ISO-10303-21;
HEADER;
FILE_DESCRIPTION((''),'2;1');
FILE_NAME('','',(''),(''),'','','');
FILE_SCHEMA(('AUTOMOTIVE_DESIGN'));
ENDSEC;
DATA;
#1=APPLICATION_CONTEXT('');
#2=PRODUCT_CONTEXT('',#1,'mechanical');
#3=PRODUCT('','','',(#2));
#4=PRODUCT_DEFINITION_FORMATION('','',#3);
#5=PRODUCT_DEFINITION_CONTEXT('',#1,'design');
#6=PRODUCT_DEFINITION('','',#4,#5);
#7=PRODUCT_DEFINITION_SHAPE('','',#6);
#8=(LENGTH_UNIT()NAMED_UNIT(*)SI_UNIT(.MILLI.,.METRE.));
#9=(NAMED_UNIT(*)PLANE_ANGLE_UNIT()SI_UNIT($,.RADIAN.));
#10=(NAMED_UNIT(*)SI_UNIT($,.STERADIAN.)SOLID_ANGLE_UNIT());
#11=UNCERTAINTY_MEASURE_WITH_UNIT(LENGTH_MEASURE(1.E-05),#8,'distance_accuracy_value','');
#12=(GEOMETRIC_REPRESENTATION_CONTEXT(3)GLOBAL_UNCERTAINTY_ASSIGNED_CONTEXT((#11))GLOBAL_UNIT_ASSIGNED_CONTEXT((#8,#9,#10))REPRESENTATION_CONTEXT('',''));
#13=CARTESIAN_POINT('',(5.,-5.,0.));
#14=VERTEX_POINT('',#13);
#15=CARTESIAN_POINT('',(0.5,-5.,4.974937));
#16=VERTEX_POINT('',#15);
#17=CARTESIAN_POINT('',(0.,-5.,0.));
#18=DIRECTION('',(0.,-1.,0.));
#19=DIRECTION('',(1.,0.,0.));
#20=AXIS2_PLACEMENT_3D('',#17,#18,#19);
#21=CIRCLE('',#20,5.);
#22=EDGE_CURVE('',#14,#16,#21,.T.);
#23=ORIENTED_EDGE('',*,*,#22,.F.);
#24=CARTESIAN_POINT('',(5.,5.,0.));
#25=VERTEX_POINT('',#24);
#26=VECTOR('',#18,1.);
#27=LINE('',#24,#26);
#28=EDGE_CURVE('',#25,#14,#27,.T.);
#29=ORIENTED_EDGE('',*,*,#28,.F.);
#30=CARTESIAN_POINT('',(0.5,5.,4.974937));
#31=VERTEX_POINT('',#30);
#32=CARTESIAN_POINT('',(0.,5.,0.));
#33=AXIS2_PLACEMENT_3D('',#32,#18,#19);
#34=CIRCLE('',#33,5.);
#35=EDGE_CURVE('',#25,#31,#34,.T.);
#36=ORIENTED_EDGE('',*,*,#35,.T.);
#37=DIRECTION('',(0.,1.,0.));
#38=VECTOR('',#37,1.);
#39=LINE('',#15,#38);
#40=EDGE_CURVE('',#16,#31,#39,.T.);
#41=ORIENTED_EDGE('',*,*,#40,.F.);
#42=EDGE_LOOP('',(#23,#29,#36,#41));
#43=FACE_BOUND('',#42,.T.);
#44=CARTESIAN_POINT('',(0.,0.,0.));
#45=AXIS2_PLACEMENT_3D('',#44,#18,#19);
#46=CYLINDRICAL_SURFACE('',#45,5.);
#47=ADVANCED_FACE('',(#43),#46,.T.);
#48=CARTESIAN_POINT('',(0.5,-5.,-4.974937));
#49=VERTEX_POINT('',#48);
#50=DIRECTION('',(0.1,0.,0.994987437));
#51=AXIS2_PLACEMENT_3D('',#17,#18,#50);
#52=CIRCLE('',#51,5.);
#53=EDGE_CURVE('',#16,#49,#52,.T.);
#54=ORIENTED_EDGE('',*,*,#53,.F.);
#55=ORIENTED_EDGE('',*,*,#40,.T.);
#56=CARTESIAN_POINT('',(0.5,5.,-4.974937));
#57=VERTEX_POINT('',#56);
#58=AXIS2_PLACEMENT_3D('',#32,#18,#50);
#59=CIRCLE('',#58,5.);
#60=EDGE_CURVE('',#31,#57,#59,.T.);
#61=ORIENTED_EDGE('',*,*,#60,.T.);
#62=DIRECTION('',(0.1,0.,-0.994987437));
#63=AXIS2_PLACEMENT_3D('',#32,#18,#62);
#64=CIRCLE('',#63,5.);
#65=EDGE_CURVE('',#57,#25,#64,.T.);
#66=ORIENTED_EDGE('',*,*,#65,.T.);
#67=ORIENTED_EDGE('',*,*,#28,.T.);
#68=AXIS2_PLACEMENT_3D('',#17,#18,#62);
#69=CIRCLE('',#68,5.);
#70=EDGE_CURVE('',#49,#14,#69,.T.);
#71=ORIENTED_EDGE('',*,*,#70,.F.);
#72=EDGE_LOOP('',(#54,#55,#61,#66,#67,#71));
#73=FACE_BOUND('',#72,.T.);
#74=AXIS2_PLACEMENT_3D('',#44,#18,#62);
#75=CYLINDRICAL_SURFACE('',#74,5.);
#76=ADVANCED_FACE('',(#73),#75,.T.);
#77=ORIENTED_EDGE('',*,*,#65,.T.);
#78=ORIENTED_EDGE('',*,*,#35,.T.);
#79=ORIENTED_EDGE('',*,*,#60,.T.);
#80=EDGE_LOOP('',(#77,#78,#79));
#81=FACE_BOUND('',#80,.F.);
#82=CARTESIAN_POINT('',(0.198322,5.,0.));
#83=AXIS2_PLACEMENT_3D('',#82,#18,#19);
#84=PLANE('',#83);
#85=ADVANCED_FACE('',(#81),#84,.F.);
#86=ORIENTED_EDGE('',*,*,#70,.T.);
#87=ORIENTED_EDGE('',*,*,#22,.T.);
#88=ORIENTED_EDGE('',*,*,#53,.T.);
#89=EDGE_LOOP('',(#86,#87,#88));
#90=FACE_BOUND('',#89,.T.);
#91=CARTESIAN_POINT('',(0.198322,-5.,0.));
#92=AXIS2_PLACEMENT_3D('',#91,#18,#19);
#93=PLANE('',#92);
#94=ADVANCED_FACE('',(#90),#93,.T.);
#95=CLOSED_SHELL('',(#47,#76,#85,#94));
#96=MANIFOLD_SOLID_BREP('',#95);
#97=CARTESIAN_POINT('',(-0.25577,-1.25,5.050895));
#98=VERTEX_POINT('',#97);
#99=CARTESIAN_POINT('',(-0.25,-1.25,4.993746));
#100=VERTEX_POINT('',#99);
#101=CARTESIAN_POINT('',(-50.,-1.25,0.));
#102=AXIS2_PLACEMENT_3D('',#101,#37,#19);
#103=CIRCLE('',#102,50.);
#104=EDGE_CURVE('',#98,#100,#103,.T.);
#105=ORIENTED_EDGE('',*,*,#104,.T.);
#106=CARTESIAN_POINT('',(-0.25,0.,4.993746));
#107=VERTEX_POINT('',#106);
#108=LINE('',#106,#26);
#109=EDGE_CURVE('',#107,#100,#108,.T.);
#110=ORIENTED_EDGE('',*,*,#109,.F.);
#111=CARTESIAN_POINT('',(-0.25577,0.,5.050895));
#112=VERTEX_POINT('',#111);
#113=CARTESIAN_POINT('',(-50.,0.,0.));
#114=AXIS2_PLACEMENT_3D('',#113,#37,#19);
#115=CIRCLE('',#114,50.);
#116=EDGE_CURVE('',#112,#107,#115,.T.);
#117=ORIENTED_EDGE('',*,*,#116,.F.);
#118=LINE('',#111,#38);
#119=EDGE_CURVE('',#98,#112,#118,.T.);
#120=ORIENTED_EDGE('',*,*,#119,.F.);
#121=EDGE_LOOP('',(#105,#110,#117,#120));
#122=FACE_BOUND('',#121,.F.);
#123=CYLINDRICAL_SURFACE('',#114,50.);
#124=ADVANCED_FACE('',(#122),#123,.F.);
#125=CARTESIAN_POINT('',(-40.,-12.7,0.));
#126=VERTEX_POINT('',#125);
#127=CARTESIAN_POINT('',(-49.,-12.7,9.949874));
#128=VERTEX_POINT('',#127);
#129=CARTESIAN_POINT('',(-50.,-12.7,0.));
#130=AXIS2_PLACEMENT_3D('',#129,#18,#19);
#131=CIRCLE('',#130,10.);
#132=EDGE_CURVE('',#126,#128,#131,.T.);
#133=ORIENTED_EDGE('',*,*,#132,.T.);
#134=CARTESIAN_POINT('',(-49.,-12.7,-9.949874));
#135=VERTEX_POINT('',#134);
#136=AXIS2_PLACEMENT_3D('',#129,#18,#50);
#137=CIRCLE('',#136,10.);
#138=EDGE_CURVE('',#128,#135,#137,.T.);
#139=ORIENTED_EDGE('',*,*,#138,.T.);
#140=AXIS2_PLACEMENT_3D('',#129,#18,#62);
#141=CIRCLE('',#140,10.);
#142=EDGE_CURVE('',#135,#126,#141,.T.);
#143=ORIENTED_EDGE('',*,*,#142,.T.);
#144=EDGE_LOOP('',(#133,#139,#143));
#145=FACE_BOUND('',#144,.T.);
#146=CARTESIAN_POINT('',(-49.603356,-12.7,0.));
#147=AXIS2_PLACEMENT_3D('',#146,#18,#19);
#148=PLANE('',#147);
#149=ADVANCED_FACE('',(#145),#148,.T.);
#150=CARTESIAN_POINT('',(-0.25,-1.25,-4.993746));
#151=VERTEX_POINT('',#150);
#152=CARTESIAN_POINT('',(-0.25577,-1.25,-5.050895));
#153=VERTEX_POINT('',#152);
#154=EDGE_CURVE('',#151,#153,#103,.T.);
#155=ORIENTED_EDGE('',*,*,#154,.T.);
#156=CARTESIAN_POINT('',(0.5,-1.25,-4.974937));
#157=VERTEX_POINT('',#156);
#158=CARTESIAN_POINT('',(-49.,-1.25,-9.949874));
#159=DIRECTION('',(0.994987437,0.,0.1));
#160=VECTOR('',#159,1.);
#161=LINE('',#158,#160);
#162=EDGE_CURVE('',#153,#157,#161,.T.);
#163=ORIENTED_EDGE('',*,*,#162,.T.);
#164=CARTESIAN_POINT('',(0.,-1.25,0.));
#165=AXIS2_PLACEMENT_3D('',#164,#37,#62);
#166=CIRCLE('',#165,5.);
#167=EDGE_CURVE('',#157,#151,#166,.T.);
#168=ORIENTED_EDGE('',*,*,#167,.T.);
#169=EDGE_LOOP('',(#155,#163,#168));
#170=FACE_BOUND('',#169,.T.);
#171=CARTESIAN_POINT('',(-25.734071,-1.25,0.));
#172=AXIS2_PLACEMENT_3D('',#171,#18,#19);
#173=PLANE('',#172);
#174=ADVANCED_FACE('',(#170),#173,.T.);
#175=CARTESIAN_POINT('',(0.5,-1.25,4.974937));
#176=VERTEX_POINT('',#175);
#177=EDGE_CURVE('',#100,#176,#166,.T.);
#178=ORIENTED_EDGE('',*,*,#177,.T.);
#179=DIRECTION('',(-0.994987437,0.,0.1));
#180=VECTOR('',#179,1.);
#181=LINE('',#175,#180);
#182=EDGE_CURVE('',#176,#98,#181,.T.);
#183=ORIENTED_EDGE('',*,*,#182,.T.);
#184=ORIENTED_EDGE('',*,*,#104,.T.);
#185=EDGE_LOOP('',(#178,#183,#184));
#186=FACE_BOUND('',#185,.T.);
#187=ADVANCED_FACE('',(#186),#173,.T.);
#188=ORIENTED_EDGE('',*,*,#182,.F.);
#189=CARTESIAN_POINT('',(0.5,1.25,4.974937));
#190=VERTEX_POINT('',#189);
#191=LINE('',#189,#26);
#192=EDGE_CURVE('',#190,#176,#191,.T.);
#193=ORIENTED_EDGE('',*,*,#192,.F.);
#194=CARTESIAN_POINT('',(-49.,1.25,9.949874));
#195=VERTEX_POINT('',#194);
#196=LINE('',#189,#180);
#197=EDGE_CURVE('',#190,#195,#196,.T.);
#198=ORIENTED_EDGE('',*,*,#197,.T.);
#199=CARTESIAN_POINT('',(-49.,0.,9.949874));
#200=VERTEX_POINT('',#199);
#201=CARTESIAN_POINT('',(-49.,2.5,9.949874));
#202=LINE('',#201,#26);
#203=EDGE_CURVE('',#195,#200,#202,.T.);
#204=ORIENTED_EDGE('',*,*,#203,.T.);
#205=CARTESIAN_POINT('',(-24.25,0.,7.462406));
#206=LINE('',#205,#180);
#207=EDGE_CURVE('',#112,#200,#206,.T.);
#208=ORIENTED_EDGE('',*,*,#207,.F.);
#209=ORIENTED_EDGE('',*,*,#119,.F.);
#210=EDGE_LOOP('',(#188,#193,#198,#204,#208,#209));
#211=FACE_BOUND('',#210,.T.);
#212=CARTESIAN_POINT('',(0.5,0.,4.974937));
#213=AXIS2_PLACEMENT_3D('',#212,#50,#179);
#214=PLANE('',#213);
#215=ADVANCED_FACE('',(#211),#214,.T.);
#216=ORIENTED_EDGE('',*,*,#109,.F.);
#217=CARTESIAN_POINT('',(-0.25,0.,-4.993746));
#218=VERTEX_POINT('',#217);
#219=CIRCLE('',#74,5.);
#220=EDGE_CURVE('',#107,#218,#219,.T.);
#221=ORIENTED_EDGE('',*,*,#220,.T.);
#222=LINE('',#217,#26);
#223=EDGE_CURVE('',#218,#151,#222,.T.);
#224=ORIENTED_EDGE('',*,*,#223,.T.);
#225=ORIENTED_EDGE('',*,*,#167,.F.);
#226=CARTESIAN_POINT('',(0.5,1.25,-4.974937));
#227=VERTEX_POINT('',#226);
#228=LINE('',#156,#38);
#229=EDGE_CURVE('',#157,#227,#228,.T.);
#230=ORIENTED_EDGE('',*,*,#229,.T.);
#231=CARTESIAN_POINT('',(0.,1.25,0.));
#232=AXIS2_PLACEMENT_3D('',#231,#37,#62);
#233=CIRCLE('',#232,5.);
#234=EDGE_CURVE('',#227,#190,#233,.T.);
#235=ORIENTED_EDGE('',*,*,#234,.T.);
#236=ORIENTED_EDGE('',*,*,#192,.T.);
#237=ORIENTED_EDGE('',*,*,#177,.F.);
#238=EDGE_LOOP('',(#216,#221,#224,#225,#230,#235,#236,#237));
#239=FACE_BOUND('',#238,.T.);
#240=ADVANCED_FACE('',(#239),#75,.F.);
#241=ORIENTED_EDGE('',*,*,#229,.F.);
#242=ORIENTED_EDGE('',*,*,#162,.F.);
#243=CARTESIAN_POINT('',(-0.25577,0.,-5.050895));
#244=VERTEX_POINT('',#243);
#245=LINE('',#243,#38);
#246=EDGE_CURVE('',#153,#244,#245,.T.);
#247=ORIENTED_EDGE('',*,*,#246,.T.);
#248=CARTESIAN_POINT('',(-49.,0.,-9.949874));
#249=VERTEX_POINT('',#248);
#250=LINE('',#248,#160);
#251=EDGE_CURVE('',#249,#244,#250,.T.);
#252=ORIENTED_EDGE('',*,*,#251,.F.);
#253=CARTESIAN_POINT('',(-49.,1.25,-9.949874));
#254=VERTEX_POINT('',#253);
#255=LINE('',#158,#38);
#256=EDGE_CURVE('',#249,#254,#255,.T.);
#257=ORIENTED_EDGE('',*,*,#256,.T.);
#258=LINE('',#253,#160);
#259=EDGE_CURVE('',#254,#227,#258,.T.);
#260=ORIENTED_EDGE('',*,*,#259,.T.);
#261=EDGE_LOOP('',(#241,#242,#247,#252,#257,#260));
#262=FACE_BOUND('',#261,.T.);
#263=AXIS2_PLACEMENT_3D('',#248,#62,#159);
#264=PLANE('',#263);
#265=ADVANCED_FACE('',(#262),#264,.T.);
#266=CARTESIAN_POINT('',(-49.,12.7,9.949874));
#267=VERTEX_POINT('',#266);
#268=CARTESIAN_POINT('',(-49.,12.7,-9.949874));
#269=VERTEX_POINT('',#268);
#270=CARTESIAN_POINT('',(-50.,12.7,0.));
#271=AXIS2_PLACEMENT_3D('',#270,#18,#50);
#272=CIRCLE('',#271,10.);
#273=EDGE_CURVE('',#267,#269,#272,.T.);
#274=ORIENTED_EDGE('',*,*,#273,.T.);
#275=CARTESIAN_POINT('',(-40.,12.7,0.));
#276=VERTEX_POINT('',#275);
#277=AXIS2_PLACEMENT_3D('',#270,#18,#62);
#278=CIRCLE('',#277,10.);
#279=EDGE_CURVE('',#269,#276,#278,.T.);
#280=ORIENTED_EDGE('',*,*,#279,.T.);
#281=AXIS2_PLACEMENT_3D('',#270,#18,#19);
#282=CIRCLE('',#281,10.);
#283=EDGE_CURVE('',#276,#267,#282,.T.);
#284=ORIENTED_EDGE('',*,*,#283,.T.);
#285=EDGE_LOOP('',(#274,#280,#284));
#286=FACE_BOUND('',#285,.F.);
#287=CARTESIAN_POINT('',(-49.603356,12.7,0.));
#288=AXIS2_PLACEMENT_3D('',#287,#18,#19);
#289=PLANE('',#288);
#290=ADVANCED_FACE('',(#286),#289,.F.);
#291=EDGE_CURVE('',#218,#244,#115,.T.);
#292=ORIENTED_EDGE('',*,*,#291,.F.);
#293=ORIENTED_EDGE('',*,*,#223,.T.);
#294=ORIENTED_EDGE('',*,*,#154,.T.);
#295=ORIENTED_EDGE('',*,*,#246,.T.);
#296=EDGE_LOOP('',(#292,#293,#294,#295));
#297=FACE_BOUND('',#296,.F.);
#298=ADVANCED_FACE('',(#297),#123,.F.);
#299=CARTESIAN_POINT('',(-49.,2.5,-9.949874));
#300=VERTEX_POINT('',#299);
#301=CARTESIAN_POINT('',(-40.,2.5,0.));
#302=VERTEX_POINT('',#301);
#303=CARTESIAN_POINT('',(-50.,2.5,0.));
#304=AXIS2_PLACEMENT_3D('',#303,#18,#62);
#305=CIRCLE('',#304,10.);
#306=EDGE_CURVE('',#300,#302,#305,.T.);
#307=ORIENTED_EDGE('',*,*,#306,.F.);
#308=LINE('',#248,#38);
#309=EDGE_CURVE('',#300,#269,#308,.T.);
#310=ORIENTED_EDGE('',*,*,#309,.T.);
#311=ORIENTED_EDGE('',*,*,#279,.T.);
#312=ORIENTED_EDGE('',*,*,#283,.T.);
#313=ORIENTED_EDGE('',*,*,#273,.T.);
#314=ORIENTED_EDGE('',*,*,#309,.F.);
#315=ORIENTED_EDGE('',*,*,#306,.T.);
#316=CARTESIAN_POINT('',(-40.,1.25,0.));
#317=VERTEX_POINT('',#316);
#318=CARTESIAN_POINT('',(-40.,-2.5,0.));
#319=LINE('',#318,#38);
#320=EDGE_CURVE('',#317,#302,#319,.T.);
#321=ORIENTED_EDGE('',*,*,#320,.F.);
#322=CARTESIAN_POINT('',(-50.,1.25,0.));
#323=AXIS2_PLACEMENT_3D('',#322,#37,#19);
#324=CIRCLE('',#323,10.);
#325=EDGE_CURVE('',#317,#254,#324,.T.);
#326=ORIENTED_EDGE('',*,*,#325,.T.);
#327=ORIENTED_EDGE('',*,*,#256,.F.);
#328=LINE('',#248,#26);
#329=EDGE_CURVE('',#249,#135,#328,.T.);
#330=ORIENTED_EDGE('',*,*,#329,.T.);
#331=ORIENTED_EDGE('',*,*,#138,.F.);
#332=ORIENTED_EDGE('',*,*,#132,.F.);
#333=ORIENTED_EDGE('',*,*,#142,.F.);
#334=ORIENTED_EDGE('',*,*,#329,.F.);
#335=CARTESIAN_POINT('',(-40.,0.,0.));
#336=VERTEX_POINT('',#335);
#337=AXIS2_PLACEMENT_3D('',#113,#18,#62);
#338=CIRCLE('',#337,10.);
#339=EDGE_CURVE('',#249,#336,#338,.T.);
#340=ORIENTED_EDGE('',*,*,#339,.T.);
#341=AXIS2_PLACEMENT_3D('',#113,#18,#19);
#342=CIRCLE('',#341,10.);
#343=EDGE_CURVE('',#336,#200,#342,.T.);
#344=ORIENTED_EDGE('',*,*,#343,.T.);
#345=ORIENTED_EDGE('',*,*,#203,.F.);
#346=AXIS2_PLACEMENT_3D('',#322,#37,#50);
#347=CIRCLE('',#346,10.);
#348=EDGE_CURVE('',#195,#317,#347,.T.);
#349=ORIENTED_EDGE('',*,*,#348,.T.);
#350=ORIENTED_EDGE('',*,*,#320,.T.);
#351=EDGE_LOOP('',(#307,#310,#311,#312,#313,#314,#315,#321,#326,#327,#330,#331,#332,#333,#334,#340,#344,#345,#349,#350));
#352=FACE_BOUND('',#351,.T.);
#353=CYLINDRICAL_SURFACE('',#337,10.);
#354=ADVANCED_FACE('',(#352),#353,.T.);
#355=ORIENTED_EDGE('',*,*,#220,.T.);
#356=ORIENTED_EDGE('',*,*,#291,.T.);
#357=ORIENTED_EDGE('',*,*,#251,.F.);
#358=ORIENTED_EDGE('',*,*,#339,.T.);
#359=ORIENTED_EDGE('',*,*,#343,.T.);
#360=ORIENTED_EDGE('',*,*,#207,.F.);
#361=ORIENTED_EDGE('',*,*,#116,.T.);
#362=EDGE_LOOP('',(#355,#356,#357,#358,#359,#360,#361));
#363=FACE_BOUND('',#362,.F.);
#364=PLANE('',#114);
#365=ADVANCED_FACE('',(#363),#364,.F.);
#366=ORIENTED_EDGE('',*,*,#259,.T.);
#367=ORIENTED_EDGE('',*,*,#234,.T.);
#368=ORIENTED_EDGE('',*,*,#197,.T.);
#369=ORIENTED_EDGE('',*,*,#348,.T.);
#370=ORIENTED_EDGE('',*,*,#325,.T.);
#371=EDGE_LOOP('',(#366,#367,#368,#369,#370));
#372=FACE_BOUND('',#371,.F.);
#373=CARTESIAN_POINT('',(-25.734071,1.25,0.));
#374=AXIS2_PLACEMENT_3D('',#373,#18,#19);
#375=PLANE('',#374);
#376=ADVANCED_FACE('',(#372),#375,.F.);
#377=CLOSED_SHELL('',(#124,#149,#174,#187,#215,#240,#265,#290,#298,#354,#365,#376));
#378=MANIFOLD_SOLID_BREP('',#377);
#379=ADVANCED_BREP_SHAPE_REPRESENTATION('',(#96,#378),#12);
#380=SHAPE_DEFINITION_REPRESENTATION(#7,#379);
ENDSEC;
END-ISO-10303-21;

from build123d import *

# Parameters (mm, degrees)
F1_DEPTH   = 2.5
F2_DEPTH   = 5
F3_DEPTH   = 1.25
F5_D       = 100
F5_DEPTH   = 12.7
F5_TIP     = 30.0430309514
F5_2_D     = 100
F5_2_DEPTH = 12.7
F5_2_TIP   = 30.0430309514
F6_DEPTH   = 12.7


# Not quite as in the source:
# - a feature of the source that left no trace in its solid (it failed there, or was rolled back) is left out


with BuildPart() as f1:
    # F0 (on Front) → F1 (new body, symmetric)
    with BuildSketch(Plane.XZ):
        with BuildLine():
            ThreePointArc((-40, 0), (-42.5838015129, 6.7082039325), (-49, 9.9498743711))
            ThreePointArc((-49, 9.9498743711), (-60, 0), (-49, -9.9498743711))
            ThreePointArc((-49, -9.9498743711), (-42.5838015129, -6.7082039325), (-40, 0))
        make_face()
    extrude(amount=F1_DEPTH, both=True)

    # F5 (one way)
    with BuildSketch(Plane(origin=(0, 0, 0), x_dir=(1, 0, 0), z_dir=(0, 1, 0))):
        with Locations((-50, 0)):
            Circle(F5_D / 2)
    extrude(amount=-F5_DEPTH, mode=Mode.SUBTRACT)
    with Locations(Plane(origin=(0, 0, 0), x_dir=(1, 0, 0), z_dir=(0, 1, 0))):
        with Locations((-50, 0)):
            with Locations((0, 0, -(F5_DEPTH + F5_TIP / 2))):  # 118° drill point
                Cone(0, F5_D / 2, F5_TIP, mode=Mode.SUBTRACT)



with BuildPart() as f2:
    # F0 (on Front) → F2 (new body, symmetric)
    with BuildSketch(Plane.XZ):
        with BuildLine():
            ThreePointArc((0.5, -4.9749371855), (3.7080992435, -3.3541019662), (5, 0))
            ThreePointArc((5, 0), (3.7080992435, 3.3541019662), (0.5, 4.9749371855))
            ThreePointArc((0.5, 4.9749371855), (-5, 0), (0.5, -4.9749371855))
        make_face()
    extrude(amount=F2_DEPTH, both=True)


with BuildPart() as f3:
    # F0 (on Front) → F3 (new body, symmetric)
    with BuildSketch(Plane.XZ):
        with BuildLine():
            ThreePointArc((0.5, -4.9749371855), (-5, 0), (0.5, 4.9749371855))
            Line((0.5, 4.9749371855), (-49, 9.9498743711))
            ThreePointArc((-49, 9.9498743711), (-42.5838015129, 6.7082039325), (-40, 0))
            ThreePointArc((-40, 0), (-42.5838015129, -6.7082039325), (-49, -9.9498743711))
            Line((-49, -9.9498743711), (0.5, -4.9749371855))
        make_face()
    extrude(amount=F3_DEPTH, both=True)

    # F5#2 (one way)
    with BuildSketch(Plane(origin=(0, 0, 0), x_dir=(1, 0, 0), z_dir=(0, 1, 0))):
        with Locations((-50, 0)):
            Circle(F5_2_D / 2)
    extrude(amount=-F5_2_DEPTH, mode=Mode.SUBTRACT)
    with Locations(Plane(origin=(0, 0, 0), x_dir=(1, 0, 0), z_dir=(0, 1, 0))):
        with Locations((-50, 0)):
            with Locations((0, 0, -(F5_2_DEPTH + F5_2_TIP / 2))):  # 118° drill point
                Cone(0, F5_2_D / 2, F5_2_TIP, mode=Mode.SUBTRACT)


with BuildPart() as f1_1:
    add(f1.part)

    add(f3.part)  # F6 merges F3
    # F0 (on Front) → F6 (join, symmetric)
    with BuildSketch(Plane.XZ):
        with BuildLine():
            ThreePointArc((-40, 0), (-42.5838015129, 6.7082039325), (-49, 9.9498743711))
            ThreePointArc((-49, 9.9498743711), (-60, 0), (-49, -9.9498743711))
            ThreePointArc((-49, -9.9498743711), (-42.5838015129, -6.7082039325), (-40, 0))
        make_face()
    extrude(amount=F6_DEPTH, both=True)


solid = Compound([f2.part, f1_1.part])
